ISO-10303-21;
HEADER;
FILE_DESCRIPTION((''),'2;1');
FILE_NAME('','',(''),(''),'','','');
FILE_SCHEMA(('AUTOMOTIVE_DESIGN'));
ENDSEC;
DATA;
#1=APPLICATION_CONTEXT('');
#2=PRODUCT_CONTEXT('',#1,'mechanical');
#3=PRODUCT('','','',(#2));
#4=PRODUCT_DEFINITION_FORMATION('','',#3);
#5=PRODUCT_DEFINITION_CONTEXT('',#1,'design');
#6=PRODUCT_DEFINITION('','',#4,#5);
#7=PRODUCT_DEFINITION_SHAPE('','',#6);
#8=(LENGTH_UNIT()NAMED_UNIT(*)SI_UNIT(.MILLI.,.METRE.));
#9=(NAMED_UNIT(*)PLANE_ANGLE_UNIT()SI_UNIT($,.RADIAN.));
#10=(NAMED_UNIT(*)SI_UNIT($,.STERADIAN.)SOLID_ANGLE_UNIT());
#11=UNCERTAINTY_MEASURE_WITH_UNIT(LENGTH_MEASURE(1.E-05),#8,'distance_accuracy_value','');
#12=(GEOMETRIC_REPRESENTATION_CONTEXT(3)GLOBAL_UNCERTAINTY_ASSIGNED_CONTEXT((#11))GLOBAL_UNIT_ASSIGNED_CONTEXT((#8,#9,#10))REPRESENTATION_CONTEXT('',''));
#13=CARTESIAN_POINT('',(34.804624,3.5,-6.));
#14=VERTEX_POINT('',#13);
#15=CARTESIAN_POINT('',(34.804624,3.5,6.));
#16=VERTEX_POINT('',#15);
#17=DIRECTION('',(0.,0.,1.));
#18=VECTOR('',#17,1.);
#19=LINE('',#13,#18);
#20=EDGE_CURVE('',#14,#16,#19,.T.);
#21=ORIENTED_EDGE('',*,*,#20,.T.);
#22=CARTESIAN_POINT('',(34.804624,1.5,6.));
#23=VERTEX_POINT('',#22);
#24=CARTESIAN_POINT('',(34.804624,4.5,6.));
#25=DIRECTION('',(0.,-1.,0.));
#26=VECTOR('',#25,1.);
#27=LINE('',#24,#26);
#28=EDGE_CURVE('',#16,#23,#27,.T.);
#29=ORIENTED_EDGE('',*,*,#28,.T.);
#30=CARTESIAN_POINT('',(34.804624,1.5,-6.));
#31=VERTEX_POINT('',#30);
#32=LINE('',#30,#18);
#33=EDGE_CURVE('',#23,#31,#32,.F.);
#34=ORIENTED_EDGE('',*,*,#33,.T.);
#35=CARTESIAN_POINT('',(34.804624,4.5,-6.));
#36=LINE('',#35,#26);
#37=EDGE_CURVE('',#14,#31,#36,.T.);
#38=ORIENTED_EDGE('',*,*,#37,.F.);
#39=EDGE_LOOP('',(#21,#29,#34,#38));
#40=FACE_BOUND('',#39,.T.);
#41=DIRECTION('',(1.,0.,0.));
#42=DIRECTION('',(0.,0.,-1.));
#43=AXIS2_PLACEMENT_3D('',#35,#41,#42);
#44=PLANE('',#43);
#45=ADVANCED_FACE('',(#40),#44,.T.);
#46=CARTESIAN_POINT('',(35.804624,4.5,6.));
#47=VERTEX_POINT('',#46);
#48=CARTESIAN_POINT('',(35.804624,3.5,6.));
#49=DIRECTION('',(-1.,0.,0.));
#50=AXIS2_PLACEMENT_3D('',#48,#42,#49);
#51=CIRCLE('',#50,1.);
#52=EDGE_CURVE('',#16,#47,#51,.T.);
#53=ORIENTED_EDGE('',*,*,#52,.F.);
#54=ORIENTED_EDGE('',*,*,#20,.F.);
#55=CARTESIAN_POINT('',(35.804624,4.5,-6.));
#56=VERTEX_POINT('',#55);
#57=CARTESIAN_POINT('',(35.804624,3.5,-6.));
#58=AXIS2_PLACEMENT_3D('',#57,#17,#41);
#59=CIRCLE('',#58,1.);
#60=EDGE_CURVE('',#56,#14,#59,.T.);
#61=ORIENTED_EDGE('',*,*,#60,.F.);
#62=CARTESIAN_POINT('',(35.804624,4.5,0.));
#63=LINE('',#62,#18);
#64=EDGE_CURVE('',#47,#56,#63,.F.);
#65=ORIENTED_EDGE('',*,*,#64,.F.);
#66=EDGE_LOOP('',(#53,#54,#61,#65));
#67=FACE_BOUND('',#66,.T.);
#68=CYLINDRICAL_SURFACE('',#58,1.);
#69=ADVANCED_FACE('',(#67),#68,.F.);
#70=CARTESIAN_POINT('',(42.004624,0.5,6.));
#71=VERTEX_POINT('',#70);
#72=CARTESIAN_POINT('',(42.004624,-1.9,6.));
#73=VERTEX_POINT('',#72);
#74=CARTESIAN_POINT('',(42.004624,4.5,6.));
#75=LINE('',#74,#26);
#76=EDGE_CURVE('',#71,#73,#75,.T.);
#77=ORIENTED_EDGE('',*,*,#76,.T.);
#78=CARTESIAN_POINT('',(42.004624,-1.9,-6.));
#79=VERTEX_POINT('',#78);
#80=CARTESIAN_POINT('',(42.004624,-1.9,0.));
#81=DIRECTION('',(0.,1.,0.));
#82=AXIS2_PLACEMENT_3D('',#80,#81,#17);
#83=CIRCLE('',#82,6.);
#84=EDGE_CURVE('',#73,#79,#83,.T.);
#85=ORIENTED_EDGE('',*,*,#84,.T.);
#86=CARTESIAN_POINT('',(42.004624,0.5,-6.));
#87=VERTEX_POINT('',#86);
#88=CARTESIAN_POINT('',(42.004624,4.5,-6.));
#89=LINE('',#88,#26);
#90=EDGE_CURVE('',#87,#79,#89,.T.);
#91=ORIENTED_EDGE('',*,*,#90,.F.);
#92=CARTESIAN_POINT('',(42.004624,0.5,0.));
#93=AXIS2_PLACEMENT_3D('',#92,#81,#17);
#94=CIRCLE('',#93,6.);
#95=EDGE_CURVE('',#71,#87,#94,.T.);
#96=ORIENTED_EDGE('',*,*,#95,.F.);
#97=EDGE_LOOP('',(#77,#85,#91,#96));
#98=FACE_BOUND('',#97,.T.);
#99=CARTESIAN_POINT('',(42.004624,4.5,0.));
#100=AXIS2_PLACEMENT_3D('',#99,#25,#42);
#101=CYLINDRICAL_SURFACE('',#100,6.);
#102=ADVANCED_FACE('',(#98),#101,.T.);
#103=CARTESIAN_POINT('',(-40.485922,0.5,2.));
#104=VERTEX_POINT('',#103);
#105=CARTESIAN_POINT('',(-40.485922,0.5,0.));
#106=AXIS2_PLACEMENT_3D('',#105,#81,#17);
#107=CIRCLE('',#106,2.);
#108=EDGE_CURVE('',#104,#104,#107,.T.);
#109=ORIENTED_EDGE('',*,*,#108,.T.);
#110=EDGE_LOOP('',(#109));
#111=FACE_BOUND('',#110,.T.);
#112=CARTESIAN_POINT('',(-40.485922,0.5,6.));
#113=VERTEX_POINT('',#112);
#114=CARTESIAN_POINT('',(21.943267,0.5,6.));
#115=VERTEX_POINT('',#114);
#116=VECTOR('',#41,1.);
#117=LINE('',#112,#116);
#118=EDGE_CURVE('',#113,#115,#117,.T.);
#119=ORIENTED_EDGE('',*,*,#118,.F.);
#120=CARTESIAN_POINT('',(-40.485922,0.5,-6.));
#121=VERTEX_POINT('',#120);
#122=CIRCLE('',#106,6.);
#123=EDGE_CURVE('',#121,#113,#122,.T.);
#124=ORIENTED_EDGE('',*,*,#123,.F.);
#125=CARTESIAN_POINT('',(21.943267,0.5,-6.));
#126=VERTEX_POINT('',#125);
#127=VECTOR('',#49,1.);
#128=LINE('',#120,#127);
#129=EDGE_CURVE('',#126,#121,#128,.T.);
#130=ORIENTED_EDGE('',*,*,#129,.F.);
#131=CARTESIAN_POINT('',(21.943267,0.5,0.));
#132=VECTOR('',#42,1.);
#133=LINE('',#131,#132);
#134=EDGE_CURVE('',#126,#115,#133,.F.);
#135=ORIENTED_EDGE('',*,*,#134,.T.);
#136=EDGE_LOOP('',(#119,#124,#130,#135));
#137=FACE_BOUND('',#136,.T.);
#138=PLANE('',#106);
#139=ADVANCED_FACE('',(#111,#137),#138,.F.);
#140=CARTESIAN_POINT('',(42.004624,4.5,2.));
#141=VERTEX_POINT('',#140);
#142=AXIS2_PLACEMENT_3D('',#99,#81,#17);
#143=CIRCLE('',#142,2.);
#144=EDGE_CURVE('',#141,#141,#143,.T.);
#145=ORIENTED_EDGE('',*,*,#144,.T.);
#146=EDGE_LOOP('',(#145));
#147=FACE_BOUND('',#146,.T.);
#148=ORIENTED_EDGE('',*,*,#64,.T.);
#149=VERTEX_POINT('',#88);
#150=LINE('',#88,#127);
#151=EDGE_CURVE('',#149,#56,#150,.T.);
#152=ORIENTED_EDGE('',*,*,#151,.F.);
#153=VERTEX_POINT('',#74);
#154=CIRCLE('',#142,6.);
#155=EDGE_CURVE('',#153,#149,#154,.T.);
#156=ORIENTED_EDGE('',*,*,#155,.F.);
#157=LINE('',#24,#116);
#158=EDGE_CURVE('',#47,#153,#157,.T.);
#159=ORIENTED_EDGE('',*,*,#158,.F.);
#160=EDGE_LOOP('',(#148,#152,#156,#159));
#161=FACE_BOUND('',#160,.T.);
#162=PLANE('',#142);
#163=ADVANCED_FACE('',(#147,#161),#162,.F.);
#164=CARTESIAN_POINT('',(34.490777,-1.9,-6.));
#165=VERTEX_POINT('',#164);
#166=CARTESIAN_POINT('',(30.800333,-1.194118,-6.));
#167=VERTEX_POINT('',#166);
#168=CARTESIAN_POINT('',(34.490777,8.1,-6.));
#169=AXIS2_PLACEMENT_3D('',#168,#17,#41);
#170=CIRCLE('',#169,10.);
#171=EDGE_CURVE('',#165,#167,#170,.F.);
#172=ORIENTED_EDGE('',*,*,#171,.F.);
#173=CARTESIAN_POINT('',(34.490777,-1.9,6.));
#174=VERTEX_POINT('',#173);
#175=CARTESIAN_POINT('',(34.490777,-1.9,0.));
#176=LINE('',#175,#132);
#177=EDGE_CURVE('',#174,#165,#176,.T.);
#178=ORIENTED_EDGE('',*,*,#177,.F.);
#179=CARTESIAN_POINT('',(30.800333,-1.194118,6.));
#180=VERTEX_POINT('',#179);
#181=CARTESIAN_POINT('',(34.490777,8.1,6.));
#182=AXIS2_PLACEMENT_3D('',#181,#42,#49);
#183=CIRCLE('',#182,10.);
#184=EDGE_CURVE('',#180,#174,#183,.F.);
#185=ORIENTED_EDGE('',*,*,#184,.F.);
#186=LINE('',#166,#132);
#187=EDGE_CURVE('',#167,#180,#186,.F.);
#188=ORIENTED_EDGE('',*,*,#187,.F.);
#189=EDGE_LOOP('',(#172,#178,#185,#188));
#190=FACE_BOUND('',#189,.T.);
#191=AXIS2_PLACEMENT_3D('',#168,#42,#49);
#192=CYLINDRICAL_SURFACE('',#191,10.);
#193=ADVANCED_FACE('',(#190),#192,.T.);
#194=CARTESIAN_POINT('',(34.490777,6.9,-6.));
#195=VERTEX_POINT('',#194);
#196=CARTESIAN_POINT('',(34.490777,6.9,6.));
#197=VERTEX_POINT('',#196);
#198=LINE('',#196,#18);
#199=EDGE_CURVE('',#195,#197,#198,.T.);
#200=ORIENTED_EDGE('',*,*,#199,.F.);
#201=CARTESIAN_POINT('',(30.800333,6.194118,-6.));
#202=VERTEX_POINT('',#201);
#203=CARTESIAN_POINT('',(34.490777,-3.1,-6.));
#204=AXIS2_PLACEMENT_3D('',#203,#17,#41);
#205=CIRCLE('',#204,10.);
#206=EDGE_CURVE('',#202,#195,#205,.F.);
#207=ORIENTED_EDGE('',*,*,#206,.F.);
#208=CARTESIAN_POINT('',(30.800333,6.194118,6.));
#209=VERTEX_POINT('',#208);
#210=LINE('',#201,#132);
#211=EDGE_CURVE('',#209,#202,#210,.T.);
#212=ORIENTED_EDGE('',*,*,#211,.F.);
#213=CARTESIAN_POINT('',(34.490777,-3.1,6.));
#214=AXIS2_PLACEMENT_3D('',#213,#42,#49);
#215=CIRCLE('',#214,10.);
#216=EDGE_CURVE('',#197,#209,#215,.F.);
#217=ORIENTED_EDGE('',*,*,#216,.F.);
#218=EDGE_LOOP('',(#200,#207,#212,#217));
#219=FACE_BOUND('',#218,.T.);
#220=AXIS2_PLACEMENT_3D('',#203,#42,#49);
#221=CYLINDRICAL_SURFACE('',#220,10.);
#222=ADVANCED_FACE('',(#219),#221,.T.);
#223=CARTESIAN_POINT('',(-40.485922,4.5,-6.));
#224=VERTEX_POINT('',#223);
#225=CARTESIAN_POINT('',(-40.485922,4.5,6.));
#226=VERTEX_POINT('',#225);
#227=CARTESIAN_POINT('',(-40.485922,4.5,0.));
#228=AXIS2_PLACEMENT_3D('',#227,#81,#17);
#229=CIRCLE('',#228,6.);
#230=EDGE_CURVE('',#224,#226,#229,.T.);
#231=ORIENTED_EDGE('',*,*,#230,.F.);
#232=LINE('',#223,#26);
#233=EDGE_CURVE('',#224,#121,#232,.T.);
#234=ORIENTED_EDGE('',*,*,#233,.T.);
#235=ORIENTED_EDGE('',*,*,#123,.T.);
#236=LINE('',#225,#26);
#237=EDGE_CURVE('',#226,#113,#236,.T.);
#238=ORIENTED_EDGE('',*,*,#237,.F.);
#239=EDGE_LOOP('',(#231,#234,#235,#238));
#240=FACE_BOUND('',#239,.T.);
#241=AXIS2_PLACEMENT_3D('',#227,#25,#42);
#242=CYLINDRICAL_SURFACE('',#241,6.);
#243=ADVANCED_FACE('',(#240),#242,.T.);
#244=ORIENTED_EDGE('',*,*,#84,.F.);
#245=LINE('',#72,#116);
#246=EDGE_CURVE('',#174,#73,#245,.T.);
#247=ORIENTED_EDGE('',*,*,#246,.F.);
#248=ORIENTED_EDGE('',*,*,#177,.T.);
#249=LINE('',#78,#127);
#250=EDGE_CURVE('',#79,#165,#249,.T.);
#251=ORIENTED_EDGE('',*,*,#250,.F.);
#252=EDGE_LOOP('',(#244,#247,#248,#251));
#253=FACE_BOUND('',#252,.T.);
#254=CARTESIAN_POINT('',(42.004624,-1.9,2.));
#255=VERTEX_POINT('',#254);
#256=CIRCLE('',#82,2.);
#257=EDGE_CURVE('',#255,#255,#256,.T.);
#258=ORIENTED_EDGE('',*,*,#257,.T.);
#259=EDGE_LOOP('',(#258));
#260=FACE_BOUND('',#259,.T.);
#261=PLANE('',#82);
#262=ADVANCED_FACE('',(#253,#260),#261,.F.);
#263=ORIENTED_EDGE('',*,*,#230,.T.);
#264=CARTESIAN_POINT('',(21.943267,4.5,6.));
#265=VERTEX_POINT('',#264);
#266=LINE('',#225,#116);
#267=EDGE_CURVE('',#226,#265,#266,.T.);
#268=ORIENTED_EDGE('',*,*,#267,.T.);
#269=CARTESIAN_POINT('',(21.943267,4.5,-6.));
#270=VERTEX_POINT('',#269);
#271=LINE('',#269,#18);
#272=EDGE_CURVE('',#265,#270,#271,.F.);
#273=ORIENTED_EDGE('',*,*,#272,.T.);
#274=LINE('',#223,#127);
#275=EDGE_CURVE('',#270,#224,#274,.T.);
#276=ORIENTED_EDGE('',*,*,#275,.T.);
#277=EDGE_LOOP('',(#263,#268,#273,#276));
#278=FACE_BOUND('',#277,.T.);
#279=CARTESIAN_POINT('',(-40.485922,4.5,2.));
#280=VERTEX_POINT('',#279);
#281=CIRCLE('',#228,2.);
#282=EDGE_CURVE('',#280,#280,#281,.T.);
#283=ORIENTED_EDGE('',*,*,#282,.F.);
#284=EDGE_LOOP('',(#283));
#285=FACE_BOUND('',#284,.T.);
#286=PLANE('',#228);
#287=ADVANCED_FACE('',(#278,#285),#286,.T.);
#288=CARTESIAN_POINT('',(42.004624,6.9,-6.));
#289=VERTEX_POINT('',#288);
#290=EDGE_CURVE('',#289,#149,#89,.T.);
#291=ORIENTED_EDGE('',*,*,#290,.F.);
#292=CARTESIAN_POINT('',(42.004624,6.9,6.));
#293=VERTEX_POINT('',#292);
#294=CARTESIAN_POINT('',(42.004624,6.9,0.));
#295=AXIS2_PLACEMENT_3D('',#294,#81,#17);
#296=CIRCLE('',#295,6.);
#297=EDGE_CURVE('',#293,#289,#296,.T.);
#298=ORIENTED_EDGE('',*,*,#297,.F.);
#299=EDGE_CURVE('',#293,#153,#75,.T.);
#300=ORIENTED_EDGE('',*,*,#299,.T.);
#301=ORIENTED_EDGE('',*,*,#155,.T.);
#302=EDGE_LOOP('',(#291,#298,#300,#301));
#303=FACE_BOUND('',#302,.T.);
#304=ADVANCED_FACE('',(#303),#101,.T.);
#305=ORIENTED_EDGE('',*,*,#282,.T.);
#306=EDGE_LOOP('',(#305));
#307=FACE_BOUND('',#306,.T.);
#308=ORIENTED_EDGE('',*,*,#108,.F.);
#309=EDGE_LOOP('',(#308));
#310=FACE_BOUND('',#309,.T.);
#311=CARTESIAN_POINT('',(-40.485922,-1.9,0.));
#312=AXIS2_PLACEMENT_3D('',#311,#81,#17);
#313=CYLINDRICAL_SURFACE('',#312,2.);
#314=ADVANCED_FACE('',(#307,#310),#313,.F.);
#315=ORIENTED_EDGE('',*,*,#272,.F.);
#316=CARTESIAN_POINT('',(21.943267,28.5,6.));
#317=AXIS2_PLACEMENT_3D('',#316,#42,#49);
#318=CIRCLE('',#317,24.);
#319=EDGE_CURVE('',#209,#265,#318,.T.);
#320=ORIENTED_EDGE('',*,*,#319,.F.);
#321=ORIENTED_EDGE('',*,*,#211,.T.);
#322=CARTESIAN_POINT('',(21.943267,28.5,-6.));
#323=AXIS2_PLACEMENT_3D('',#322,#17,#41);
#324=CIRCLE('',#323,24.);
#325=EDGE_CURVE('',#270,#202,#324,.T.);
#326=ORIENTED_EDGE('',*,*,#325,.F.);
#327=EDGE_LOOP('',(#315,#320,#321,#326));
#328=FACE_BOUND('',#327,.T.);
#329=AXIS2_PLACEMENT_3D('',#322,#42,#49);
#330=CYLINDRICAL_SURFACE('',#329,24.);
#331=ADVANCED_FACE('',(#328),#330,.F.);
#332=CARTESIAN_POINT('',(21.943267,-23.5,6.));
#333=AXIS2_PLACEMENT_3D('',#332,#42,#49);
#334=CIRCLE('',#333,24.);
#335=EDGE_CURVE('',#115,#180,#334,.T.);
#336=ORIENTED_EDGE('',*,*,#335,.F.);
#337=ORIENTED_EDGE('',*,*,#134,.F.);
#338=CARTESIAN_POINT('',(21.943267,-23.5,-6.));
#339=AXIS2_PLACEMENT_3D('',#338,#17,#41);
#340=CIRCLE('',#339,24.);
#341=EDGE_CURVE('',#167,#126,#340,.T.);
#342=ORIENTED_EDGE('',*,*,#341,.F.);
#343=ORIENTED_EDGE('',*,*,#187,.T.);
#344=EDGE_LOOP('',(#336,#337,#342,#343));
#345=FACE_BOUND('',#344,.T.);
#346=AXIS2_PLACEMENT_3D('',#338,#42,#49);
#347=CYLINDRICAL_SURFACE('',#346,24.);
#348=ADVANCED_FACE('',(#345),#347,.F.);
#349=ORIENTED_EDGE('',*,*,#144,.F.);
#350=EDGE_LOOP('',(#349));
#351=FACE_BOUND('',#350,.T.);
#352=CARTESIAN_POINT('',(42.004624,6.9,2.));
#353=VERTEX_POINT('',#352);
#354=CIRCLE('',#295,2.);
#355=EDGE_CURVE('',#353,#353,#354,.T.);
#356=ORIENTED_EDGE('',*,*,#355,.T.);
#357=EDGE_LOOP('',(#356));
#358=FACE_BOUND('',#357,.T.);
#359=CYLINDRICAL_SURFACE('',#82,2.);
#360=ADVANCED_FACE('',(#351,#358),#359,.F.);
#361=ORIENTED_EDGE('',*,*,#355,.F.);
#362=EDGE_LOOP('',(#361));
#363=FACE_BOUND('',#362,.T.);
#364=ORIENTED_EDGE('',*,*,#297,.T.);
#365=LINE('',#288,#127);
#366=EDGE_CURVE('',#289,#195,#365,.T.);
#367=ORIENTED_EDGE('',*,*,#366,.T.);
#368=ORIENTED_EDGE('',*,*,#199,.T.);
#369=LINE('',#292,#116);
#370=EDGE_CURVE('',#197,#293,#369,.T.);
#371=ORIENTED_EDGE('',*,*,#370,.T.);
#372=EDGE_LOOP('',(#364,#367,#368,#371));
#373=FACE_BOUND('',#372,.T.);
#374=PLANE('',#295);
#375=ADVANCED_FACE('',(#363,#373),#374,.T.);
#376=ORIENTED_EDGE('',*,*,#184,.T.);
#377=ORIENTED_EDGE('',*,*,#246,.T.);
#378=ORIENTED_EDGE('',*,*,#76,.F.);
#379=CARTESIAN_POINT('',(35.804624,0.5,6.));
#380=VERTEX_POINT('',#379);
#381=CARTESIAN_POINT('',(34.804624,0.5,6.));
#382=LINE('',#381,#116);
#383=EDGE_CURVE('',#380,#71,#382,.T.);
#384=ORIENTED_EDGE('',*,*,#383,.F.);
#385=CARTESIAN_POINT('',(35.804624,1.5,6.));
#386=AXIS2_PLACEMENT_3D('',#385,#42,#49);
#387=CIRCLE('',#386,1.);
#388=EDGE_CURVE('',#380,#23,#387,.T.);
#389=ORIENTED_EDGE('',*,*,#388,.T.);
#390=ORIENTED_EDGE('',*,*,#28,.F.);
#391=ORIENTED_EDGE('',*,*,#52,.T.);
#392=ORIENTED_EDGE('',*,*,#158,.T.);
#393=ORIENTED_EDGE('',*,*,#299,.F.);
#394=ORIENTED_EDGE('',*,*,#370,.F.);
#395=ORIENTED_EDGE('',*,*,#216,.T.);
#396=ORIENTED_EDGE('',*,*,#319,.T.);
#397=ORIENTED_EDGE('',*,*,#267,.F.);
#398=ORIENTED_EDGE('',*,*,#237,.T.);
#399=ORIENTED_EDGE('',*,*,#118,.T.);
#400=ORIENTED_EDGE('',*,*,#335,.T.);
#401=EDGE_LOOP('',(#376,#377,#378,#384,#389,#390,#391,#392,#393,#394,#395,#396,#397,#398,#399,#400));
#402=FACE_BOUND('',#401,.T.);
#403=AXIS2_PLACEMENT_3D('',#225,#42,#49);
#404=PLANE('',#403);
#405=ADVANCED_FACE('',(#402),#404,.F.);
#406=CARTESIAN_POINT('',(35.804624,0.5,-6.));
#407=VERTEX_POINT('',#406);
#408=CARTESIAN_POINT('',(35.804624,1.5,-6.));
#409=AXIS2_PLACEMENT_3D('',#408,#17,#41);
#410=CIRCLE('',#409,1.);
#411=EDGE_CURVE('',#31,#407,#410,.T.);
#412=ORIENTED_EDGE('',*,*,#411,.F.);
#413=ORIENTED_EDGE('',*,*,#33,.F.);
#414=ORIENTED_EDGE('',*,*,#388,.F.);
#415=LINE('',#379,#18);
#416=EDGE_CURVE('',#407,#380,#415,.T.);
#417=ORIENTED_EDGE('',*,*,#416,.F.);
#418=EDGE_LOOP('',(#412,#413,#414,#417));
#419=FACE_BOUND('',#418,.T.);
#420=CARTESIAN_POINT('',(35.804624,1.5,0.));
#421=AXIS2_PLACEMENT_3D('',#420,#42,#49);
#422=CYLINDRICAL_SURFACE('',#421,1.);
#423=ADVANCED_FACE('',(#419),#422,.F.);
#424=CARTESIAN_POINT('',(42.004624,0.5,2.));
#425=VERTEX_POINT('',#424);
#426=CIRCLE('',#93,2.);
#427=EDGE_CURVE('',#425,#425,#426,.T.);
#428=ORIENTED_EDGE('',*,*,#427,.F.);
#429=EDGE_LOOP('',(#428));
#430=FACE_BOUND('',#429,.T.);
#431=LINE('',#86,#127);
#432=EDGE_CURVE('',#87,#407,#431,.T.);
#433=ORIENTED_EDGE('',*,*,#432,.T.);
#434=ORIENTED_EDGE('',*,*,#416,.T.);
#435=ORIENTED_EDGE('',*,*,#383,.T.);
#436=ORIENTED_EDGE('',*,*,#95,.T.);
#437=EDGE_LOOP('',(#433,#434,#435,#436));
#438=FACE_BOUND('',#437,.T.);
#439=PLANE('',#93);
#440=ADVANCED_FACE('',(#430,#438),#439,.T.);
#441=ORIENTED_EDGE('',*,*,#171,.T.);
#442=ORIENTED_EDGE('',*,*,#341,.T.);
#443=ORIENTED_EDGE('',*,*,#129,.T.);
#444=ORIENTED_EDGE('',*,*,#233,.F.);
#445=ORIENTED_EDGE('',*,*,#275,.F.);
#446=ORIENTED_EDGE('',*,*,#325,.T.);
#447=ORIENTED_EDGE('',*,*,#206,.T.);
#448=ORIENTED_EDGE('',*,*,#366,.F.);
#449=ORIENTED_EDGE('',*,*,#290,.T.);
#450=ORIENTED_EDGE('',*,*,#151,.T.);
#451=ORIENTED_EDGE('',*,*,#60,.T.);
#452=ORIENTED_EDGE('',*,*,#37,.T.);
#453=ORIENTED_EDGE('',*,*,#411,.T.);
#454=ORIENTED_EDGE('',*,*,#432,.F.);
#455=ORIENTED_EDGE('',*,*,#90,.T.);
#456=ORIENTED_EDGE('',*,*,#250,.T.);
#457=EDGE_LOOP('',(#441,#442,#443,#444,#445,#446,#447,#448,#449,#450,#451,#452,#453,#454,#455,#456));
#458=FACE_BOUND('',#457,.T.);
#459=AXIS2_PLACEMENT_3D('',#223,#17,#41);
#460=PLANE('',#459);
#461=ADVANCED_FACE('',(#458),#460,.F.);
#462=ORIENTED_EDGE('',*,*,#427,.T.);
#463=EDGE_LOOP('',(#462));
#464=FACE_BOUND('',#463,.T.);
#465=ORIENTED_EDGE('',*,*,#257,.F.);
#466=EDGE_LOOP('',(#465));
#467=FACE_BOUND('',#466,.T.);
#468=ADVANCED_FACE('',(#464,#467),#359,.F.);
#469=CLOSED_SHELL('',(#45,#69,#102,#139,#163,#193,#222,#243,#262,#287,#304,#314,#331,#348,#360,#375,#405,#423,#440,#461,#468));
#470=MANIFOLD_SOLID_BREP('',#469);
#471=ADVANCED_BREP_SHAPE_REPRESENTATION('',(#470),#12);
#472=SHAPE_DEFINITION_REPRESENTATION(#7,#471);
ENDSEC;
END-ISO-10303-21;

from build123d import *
from build123d.topology import SkipClean

# Parameters (mm, degrees)
SKETCH1_R                = 2.4
BOSS_EXTRUDE1_DEPTH      = 5
BOSS_EXTRUDE2_DEPTH      = 3
BOSS_EXTRUDE2_DEPTH_BACK = 8
SKETCH3_R                = 2.4
CUT_EXTRUDE1_DEPTH       = 2.5
CUT_EXTRUDE1_DEPTH_BACK  = 2.5
SKETCH4_R                = 2.4
FILLET1_R                = 30
SCALE1_SCALE             = 0.8
CUT_EXTRUDE2_DEPTH       = 49.577813504
CUT_EXTRUDE2_DEPTH_BACK  = 49.577813504
SKETCH5_R                = 2
FILLET2_R                = 1
FILLET3_R                = 10


with BuildPart() as part:
    # Sketch1 → Boss-Extrude1 (new body)
    with BuildSketch(Plane(origin=(0, 0, 0), x_dir=(1, 0, 0), z_dir=(0, 1, 0))):
        with BuildLine():
            Line((-51.5565916, 7.5), (51.5565916, 7.5))
            ThreePointArc((51.5565916, 7.5), (59.0565916, 0), (51.5565916, -7.5))
            Line((51.5565916, -7.5), (-51.5565916, -7.5))
            ThreePointArc((-51.5565916, -7.5), (-59.0565916, 0), (-51.5565916, 7.5))
        make_face()
        with Locations(Location((-51.5565916, 0, 0), (0, 0, 270))):
            Circle(SKETCH1_R, mode=Mode.SUBTRACT)
        with Locations(Location((51.5565916, 0, 0), (0, 0, 270))):
            Circle(SKETCH1_R, mode=Mode.SUBTRACT)
    extrude(amount=BOSS_EXTRUDE1_DEPTH)

    # Sketch3 → Boss-Extrude2 (add, two sides: drawn at the far end of the back side and taken through both)
    with SkipClean():  # the faces are left unmerged after this step: merging them gives an invalid solid
        with BuildSketch(Plane(origin=(0, 5, 0), x_dir=(1, 0, 0), z_dir=(0, 1, 0)).offset(-BOSS_EXTRUDE2_DEPTH_BACK)):
            with BuildLine():
                Line((51.5565916, 7.5), (39.5565916, 7.5))
                Line((39.5565916, 7.5), (39.5565916, -7.5))
                Line((39.5565916, -7.5), (51.5565916, -7.5))
                ThreePointArc((51.5565916, -7.5), (59.0565916, 0), (51.5565916, 7.5))
            make_face()
            with Locations(Location((51.5565916, 0, 0), (0, 0, 270))):
                Circle(SKETCH3_R, mode=Mode.SUBTRACT)
        extrude(amount=BOSS_EXTRUDE2_DEPTH + BOSS_EXTRUDE2_DEPTH_BACK)
    add(part.part.scale(1), mode=Mode.REPLACE)  # the faces are merged on a copy

    # Sketch4 → Cut-Extrude1 (cut, two sides: drawn at the far end of the back side and taken through both)
    with BuildSketch(Plane(origin=(0, 2.5, 0), x_dir=(1, 0, 0), z_dir=(0, 1, 0)).offset(-CUT_EXTRUDE1_DEPTH_BACK)):
        with BuildLine():
            Line((42.5565916, 7.5), (42.5565916, -7.5))
            Line((42.5565916, -7.5), (51.5565916, -7.5))
            ThreePointArc((51.5565916, -7.5), (59.0565916, 0), (51.5565916, 7.5))
            Line((51.5565916, 7.5), (42.5565916, 7.5))
        make_face()
        with Locations(Location((51.5565916, 0, 0), (0, 0, 270))):
            Circle(SKETCH4_R, mode=Mode.SUBTRACT)
    extrude(amount=CUT_EXTRUDE1_DEPTH + CUT_EXTRUDE1_DEPTH_BACK, mode=Mode.SUBTRACT)

    # Fillet1
    # the kernel refuses this fillet: 30 mm, written as the material it adds along each edge
    with BuildSketch(Plane(origin=(39.5565916, 0, -7.5), x_dir=(0, -1, 0), z_dir=(0, 0, 1))) as fillet1_piece_1:
        with BuildLine():
            CenterArc((30, -13.076696831), FILLET1_R, 154.158067237, 25.841932763)
            Line((0, -13.076696831), (-0.6, -13.076696831))
            Line((-0.6, -13.076696831), (-0.6, 0))
            Line((-0.6, 0), (0, 0.6))
            ThreePointArc((0, 0.6), (1.5, 0.6), (2.46, 0.261533937))
            Line((2.46, 0.261533937), (3, 0))
        make_face()
    extrude(amount=15)
    with BuildSketch(Plane(origin=(39.5565916, 5, -7.5), x_dir=(-1, 0, 0), z_dir=(0, 0, 1))) as fillet1_piece_2:
        with BuildLine():
            CenterArc((13.076696831, -30), FILLET1_R, 90, 25.841932763)
            Line((0, -3), (-0.261533937, -2.46))
            ThreePointArc((-0.261533937, -2.46), (-0.6, -1.5), (-0.6, 0))
            Line((-0.6, 0), (0, 0.6))
            Line((0, 0.6), (13.076696831, 0.6))
            Line((13.076696831, 0.6), (13.076696831, 0))
        make_face()
    extrude(amount=15)


with BuildPart() as part_1:
    # Scale1: scaled about (3.796755654, 2.5, 0)
    add(part.part.scale(SCALE1_SCALE).moved(Location((0.759351131, 0.5, 0))))

    # Sketch5 → Cut-Extrude2 (cut, two sides: drawn at the far end of the back side and taken through both)
    with BuildSketch(Plane(origin=(0, 2.5, 0), x_dir=(1, 0, 0), z_dir=(0, 1, 0)).offset(-CUT_EXTRUDE2_DEPTH_BACK)):
        with Locations(Location((-40.485922149, 0, 0), (0, 0, 270))):
            Circle(SKETCH5_R)
        with Locations(Location((42.004624411, 0, 0), (0, 0, 270))):
            Circle(SKETCH5_R)
    extrude(amount=CUT_EXTRUDE2_DEPTH + CUT_EXTRUDE2_DEPTH_BACK, mode=Mode.SUBTRACT)

    # Fillet2
    fillet2_edges = [part_1.edges().sort_by_distance(p)[0] for p in [
        (34.804624411, 4.5, 0),
        (34.804624411, 0.5, 0),
    ]]
    fillet(fillet2_edges, radius=FILLET2_R)

    # Fillet3
    fillet3_edges = [part_1.edges().sort_by_distance(p)[0] for p in [
        (32.404624411, -1.9, 0),
        (32.404624411, 6.9, 0),
    ]]
    fillet(fillet3_edges, radius=FILLET3_R)


solid = part_1.part
